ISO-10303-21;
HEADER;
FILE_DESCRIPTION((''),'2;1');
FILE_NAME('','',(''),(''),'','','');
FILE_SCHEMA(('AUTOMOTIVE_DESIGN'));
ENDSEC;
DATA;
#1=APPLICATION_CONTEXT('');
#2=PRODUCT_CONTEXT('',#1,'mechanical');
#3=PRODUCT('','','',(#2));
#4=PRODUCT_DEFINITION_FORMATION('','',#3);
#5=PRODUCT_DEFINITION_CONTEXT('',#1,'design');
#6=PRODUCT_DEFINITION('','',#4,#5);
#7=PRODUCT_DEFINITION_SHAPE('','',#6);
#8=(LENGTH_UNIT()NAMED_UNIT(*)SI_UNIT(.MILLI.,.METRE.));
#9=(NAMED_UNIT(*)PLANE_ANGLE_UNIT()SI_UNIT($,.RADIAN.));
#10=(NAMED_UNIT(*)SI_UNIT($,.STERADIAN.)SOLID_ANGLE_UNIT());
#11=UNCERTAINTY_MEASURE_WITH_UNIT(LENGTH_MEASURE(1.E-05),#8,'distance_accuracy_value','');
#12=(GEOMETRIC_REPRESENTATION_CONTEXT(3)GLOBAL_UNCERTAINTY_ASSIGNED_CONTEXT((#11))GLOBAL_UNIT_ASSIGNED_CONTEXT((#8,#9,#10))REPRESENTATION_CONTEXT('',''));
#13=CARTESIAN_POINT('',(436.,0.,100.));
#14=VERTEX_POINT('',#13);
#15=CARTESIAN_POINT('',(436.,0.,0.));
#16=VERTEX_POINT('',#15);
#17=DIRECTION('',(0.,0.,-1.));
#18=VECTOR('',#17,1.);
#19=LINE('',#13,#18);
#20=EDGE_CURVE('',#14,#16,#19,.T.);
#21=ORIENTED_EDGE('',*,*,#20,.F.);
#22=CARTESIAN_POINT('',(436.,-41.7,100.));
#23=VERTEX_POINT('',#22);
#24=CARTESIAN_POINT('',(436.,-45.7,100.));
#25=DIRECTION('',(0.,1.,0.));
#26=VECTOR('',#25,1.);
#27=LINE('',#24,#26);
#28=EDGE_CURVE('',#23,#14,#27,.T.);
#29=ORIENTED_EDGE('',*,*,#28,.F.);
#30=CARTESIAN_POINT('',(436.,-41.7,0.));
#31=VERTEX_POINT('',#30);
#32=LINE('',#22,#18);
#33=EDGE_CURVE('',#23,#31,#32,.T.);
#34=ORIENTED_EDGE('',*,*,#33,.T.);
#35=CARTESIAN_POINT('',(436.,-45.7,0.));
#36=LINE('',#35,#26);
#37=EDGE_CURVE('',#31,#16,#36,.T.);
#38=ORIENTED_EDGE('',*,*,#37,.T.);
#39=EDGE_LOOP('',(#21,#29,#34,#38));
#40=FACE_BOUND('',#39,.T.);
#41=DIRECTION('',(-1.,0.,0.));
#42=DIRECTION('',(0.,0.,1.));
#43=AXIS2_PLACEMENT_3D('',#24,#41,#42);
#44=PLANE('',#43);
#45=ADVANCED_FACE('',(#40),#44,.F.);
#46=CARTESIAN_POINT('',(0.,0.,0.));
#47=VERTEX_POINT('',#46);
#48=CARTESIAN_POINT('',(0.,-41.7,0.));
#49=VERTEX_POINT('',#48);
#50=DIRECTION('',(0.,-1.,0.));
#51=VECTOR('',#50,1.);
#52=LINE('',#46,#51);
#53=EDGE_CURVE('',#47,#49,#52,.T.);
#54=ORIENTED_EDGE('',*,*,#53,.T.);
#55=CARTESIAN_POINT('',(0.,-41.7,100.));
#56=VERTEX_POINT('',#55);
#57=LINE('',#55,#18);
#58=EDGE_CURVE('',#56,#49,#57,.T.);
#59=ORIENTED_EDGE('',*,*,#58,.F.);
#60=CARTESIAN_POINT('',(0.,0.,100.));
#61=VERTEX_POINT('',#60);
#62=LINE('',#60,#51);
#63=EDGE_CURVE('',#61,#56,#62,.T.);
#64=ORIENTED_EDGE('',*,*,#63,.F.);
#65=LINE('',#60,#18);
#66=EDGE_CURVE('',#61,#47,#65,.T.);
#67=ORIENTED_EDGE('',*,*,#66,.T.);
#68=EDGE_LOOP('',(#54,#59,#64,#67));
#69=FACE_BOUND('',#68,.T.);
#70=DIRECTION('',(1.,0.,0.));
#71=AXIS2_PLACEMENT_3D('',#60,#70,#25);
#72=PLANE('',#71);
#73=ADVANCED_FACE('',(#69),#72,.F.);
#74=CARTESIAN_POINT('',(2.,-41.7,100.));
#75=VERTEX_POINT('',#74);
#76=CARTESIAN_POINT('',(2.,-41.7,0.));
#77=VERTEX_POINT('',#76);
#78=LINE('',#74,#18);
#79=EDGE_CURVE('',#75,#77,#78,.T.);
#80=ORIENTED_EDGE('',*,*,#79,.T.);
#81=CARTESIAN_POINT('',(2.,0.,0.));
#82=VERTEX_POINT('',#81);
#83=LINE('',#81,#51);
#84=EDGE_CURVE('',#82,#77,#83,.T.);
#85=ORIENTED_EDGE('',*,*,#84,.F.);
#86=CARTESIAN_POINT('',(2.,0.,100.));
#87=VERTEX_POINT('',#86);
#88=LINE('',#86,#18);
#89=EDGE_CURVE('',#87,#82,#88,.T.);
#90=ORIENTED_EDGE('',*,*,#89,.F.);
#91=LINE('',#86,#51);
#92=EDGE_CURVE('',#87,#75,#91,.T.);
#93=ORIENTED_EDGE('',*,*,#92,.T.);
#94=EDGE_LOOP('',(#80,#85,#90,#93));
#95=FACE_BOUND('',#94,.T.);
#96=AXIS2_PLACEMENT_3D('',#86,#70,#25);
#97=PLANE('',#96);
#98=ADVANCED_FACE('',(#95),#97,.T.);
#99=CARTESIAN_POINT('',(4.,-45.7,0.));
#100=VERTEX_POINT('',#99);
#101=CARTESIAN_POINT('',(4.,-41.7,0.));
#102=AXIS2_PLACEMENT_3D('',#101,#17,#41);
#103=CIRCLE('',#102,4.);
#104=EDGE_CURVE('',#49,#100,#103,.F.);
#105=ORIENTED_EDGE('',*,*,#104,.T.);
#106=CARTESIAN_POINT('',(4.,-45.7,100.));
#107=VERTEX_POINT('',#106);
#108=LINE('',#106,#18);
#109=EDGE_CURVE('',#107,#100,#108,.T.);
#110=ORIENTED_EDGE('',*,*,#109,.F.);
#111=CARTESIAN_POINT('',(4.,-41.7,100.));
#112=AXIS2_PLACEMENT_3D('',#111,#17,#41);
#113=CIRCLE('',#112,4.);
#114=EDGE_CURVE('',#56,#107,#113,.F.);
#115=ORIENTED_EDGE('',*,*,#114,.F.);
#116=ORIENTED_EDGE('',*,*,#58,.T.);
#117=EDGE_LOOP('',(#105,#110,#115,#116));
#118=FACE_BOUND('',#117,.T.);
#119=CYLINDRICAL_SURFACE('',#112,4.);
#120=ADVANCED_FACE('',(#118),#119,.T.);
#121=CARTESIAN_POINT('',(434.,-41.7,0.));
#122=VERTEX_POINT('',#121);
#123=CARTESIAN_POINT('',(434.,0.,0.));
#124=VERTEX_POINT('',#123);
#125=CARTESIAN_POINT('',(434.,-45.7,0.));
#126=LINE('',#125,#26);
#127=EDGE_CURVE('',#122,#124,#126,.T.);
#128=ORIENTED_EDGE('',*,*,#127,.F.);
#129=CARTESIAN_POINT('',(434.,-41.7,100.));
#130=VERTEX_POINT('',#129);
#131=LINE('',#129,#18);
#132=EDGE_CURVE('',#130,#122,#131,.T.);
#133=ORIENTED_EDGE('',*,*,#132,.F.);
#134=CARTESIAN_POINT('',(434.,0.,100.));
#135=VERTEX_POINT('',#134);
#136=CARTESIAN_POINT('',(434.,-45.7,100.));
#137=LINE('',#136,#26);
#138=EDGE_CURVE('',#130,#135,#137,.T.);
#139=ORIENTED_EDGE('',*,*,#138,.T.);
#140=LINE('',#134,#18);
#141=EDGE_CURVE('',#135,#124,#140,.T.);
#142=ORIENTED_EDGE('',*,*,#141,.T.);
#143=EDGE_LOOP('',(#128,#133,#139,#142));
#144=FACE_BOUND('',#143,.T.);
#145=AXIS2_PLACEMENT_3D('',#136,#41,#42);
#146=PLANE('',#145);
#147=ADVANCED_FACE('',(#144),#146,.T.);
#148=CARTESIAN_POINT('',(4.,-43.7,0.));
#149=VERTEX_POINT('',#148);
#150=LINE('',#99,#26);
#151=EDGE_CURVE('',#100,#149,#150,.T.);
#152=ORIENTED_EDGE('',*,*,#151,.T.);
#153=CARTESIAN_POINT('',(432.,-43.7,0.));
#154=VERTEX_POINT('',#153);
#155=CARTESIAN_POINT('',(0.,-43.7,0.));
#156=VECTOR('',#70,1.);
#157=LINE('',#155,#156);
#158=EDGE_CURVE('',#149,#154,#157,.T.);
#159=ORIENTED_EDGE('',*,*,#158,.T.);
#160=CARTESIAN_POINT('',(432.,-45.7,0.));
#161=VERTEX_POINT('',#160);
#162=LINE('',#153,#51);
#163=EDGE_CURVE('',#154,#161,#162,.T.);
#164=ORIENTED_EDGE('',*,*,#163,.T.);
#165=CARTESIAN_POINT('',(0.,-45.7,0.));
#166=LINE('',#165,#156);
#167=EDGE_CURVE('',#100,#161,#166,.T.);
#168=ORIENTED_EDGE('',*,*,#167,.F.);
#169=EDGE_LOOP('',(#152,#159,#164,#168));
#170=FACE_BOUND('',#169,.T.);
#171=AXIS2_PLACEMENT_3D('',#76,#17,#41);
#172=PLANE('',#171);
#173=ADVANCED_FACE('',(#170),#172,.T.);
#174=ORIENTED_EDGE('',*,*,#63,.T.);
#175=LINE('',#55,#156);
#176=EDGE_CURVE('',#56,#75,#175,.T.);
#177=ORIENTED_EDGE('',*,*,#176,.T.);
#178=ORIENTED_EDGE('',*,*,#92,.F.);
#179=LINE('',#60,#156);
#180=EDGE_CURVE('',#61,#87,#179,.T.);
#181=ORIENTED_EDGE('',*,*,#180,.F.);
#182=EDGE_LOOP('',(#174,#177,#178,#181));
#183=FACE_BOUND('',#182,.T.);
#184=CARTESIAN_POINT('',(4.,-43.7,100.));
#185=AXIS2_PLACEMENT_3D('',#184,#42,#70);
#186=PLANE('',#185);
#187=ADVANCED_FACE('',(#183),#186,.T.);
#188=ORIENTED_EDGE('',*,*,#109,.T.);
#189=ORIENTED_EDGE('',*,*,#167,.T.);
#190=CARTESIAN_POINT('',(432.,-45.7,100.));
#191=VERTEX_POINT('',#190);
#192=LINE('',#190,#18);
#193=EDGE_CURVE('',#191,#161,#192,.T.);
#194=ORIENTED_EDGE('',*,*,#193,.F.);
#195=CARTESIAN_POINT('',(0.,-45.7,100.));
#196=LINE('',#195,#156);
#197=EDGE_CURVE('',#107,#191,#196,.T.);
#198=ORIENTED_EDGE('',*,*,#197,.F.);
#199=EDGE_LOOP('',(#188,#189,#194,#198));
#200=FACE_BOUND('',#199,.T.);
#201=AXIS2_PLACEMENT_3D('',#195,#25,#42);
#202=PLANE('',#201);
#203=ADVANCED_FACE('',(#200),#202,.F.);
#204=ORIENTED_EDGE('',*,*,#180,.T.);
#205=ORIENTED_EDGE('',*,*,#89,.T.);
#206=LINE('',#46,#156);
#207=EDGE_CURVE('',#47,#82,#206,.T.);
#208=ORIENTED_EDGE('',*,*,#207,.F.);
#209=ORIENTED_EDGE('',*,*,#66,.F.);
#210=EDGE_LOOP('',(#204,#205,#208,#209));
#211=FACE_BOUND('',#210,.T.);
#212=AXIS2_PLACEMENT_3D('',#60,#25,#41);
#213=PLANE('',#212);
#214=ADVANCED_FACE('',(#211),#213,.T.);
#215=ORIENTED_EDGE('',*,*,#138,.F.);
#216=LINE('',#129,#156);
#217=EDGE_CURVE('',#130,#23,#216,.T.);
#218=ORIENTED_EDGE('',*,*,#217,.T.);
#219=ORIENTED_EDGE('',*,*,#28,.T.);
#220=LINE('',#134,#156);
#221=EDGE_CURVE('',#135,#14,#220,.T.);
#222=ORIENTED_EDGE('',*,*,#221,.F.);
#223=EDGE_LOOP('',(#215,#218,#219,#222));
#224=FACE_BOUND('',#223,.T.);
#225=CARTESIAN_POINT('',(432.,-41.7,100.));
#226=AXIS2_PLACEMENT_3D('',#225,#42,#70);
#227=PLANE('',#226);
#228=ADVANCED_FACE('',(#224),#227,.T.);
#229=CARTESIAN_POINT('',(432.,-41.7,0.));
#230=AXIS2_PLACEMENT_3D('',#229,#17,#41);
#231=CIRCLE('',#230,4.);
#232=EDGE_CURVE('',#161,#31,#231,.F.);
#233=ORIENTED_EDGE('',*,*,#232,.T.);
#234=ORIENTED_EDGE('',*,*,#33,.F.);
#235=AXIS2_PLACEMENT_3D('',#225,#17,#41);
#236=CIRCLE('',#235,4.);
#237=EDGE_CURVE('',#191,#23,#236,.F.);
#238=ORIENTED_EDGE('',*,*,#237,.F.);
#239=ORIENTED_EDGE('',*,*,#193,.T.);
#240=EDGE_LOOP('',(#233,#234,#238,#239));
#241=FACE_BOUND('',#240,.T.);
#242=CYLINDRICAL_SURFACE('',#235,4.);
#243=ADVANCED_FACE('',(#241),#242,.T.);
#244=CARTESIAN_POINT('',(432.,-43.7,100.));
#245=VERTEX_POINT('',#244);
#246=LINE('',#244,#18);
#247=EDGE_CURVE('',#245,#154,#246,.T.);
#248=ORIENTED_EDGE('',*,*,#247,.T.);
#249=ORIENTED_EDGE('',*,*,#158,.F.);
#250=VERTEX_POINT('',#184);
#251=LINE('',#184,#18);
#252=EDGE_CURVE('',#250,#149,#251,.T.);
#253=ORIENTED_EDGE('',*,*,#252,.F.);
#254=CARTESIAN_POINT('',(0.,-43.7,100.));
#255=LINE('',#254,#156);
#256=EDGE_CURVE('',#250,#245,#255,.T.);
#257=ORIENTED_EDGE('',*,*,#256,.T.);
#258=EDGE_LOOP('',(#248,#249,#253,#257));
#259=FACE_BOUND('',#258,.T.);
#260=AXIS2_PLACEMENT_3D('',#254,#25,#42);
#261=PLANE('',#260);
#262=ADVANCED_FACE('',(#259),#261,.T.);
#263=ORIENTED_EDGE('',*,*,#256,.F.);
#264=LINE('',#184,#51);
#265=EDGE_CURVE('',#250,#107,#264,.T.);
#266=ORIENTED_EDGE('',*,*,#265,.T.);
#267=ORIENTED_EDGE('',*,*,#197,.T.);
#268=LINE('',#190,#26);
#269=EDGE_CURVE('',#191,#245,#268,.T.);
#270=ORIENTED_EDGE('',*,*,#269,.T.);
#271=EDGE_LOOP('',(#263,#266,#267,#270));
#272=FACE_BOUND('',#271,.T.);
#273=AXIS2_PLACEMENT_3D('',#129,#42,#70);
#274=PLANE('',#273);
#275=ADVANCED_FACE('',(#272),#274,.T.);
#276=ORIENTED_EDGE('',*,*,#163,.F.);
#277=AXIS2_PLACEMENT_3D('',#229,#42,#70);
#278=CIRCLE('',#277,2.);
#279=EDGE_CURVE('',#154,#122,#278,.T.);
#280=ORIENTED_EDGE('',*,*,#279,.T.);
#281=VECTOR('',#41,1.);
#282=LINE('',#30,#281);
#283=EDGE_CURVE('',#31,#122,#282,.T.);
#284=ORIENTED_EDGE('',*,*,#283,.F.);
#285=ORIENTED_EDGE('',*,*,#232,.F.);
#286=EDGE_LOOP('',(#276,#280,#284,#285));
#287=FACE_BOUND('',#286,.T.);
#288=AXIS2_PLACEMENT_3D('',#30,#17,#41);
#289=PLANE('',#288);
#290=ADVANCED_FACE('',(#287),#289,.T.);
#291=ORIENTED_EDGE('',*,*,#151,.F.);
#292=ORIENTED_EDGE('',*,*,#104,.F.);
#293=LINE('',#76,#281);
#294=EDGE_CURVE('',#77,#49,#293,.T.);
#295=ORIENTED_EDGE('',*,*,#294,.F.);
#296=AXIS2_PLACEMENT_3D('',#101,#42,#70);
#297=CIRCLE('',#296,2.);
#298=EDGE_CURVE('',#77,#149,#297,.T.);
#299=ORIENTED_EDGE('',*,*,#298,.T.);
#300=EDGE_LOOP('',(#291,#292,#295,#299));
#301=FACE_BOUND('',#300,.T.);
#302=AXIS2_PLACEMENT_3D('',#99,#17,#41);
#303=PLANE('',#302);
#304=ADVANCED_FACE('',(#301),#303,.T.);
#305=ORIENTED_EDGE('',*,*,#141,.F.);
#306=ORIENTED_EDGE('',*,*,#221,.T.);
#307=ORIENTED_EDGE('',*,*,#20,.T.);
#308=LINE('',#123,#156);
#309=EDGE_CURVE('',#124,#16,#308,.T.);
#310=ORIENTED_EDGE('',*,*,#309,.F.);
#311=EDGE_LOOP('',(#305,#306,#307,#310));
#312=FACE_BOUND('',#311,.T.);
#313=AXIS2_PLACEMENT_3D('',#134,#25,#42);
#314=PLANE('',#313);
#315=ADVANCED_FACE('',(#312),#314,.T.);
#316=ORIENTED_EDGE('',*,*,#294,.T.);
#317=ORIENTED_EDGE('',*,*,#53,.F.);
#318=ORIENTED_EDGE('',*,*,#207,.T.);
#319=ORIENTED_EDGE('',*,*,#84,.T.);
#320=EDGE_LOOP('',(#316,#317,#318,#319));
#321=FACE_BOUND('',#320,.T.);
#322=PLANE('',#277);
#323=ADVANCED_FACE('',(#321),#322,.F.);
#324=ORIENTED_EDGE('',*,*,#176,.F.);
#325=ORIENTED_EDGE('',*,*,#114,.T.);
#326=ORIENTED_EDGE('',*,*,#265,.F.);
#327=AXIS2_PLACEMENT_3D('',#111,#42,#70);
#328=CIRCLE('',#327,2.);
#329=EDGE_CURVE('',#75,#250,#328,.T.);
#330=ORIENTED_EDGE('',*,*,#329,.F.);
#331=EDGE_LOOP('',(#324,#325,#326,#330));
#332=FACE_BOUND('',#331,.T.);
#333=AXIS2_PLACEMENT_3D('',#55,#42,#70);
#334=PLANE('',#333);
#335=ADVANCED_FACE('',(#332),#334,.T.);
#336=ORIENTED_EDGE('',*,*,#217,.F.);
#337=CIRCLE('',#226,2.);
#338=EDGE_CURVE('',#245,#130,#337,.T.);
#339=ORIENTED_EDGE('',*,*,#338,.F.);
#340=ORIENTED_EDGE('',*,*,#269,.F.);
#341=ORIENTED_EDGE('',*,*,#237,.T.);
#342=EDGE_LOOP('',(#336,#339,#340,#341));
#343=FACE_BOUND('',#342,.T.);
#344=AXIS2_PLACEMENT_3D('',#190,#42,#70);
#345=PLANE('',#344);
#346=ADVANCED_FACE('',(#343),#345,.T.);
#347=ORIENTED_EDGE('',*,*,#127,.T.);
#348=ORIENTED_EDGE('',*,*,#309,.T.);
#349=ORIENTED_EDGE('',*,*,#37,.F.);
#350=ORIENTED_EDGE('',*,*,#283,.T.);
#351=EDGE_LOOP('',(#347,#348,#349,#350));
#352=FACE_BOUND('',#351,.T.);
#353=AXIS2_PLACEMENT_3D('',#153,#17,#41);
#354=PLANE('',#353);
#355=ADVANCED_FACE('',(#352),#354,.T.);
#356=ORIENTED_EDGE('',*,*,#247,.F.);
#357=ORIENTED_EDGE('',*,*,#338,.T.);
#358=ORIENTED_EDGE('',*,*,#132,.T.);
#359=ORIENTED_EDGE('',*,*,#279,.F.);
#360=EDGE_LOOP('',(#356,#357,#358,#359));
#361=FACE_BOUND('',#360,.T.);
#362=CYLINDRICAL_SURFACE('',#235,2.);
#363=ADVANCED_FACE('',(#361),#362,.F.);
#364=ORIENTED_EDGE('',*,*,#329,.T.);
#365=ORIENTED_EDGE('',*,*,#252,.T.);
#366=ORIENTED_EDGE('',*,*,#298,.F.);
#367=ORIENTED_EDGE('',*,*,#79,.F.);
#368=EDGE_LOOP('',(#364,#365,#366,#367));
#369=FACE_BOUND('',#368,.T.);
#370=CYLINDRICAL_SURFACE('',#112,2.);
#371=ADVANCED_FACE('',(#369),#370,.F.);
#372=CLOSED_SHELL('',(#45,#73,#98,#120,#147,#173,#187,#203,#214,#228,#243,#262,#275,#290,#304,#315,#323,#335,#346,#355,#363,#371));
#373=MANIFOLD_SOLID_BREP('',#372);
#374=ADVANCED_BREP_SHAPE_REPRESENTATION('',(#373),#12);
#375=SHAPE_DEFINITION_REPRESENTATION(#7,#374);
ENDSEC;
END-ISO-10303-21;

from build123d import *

# Parameters (mm, degrees)
SM_BASE_FLANGE_1_DEPTH = 100


# Sheet-metal steps are written as plain solids
with BuildPart() as part:
    # Sketch 1 → Базовая кромка1 (new body)
    with BuildSketch(Plane.XY):
        with BuildLine():
            Line((0, 0), (0, -41.7))
            ThreePointArc((0, -41.7), (1.171572875, -44.528427125), (4, -45.7))
            Line((4, -45.7), (432, -45.7))
            ThreePointArc((432, -45.7), (434.828427125, -44.528427125), (436, -41.7))
            Line((436, -41.7), (436, 0))
            Line((436, 0), (434, 0))
            Line((434, 0), (434, -41.7))
            ThreePointArc((434, -41.7), (433.414213562, -43.114213562), (432, -43.7))
            Line((432, -43.7), (4, -43.7))
            ThreePointArc((4, -43.7), (2.585786438, -43.114213562), (2, -41.7))
            Line((2, -41.7), (2, 0))
            Line((2, 0), (0, 0))
        make_face()
    extrude(amount=SM_BASE_FLANGE_1_DEPTH)


solid = part.part
